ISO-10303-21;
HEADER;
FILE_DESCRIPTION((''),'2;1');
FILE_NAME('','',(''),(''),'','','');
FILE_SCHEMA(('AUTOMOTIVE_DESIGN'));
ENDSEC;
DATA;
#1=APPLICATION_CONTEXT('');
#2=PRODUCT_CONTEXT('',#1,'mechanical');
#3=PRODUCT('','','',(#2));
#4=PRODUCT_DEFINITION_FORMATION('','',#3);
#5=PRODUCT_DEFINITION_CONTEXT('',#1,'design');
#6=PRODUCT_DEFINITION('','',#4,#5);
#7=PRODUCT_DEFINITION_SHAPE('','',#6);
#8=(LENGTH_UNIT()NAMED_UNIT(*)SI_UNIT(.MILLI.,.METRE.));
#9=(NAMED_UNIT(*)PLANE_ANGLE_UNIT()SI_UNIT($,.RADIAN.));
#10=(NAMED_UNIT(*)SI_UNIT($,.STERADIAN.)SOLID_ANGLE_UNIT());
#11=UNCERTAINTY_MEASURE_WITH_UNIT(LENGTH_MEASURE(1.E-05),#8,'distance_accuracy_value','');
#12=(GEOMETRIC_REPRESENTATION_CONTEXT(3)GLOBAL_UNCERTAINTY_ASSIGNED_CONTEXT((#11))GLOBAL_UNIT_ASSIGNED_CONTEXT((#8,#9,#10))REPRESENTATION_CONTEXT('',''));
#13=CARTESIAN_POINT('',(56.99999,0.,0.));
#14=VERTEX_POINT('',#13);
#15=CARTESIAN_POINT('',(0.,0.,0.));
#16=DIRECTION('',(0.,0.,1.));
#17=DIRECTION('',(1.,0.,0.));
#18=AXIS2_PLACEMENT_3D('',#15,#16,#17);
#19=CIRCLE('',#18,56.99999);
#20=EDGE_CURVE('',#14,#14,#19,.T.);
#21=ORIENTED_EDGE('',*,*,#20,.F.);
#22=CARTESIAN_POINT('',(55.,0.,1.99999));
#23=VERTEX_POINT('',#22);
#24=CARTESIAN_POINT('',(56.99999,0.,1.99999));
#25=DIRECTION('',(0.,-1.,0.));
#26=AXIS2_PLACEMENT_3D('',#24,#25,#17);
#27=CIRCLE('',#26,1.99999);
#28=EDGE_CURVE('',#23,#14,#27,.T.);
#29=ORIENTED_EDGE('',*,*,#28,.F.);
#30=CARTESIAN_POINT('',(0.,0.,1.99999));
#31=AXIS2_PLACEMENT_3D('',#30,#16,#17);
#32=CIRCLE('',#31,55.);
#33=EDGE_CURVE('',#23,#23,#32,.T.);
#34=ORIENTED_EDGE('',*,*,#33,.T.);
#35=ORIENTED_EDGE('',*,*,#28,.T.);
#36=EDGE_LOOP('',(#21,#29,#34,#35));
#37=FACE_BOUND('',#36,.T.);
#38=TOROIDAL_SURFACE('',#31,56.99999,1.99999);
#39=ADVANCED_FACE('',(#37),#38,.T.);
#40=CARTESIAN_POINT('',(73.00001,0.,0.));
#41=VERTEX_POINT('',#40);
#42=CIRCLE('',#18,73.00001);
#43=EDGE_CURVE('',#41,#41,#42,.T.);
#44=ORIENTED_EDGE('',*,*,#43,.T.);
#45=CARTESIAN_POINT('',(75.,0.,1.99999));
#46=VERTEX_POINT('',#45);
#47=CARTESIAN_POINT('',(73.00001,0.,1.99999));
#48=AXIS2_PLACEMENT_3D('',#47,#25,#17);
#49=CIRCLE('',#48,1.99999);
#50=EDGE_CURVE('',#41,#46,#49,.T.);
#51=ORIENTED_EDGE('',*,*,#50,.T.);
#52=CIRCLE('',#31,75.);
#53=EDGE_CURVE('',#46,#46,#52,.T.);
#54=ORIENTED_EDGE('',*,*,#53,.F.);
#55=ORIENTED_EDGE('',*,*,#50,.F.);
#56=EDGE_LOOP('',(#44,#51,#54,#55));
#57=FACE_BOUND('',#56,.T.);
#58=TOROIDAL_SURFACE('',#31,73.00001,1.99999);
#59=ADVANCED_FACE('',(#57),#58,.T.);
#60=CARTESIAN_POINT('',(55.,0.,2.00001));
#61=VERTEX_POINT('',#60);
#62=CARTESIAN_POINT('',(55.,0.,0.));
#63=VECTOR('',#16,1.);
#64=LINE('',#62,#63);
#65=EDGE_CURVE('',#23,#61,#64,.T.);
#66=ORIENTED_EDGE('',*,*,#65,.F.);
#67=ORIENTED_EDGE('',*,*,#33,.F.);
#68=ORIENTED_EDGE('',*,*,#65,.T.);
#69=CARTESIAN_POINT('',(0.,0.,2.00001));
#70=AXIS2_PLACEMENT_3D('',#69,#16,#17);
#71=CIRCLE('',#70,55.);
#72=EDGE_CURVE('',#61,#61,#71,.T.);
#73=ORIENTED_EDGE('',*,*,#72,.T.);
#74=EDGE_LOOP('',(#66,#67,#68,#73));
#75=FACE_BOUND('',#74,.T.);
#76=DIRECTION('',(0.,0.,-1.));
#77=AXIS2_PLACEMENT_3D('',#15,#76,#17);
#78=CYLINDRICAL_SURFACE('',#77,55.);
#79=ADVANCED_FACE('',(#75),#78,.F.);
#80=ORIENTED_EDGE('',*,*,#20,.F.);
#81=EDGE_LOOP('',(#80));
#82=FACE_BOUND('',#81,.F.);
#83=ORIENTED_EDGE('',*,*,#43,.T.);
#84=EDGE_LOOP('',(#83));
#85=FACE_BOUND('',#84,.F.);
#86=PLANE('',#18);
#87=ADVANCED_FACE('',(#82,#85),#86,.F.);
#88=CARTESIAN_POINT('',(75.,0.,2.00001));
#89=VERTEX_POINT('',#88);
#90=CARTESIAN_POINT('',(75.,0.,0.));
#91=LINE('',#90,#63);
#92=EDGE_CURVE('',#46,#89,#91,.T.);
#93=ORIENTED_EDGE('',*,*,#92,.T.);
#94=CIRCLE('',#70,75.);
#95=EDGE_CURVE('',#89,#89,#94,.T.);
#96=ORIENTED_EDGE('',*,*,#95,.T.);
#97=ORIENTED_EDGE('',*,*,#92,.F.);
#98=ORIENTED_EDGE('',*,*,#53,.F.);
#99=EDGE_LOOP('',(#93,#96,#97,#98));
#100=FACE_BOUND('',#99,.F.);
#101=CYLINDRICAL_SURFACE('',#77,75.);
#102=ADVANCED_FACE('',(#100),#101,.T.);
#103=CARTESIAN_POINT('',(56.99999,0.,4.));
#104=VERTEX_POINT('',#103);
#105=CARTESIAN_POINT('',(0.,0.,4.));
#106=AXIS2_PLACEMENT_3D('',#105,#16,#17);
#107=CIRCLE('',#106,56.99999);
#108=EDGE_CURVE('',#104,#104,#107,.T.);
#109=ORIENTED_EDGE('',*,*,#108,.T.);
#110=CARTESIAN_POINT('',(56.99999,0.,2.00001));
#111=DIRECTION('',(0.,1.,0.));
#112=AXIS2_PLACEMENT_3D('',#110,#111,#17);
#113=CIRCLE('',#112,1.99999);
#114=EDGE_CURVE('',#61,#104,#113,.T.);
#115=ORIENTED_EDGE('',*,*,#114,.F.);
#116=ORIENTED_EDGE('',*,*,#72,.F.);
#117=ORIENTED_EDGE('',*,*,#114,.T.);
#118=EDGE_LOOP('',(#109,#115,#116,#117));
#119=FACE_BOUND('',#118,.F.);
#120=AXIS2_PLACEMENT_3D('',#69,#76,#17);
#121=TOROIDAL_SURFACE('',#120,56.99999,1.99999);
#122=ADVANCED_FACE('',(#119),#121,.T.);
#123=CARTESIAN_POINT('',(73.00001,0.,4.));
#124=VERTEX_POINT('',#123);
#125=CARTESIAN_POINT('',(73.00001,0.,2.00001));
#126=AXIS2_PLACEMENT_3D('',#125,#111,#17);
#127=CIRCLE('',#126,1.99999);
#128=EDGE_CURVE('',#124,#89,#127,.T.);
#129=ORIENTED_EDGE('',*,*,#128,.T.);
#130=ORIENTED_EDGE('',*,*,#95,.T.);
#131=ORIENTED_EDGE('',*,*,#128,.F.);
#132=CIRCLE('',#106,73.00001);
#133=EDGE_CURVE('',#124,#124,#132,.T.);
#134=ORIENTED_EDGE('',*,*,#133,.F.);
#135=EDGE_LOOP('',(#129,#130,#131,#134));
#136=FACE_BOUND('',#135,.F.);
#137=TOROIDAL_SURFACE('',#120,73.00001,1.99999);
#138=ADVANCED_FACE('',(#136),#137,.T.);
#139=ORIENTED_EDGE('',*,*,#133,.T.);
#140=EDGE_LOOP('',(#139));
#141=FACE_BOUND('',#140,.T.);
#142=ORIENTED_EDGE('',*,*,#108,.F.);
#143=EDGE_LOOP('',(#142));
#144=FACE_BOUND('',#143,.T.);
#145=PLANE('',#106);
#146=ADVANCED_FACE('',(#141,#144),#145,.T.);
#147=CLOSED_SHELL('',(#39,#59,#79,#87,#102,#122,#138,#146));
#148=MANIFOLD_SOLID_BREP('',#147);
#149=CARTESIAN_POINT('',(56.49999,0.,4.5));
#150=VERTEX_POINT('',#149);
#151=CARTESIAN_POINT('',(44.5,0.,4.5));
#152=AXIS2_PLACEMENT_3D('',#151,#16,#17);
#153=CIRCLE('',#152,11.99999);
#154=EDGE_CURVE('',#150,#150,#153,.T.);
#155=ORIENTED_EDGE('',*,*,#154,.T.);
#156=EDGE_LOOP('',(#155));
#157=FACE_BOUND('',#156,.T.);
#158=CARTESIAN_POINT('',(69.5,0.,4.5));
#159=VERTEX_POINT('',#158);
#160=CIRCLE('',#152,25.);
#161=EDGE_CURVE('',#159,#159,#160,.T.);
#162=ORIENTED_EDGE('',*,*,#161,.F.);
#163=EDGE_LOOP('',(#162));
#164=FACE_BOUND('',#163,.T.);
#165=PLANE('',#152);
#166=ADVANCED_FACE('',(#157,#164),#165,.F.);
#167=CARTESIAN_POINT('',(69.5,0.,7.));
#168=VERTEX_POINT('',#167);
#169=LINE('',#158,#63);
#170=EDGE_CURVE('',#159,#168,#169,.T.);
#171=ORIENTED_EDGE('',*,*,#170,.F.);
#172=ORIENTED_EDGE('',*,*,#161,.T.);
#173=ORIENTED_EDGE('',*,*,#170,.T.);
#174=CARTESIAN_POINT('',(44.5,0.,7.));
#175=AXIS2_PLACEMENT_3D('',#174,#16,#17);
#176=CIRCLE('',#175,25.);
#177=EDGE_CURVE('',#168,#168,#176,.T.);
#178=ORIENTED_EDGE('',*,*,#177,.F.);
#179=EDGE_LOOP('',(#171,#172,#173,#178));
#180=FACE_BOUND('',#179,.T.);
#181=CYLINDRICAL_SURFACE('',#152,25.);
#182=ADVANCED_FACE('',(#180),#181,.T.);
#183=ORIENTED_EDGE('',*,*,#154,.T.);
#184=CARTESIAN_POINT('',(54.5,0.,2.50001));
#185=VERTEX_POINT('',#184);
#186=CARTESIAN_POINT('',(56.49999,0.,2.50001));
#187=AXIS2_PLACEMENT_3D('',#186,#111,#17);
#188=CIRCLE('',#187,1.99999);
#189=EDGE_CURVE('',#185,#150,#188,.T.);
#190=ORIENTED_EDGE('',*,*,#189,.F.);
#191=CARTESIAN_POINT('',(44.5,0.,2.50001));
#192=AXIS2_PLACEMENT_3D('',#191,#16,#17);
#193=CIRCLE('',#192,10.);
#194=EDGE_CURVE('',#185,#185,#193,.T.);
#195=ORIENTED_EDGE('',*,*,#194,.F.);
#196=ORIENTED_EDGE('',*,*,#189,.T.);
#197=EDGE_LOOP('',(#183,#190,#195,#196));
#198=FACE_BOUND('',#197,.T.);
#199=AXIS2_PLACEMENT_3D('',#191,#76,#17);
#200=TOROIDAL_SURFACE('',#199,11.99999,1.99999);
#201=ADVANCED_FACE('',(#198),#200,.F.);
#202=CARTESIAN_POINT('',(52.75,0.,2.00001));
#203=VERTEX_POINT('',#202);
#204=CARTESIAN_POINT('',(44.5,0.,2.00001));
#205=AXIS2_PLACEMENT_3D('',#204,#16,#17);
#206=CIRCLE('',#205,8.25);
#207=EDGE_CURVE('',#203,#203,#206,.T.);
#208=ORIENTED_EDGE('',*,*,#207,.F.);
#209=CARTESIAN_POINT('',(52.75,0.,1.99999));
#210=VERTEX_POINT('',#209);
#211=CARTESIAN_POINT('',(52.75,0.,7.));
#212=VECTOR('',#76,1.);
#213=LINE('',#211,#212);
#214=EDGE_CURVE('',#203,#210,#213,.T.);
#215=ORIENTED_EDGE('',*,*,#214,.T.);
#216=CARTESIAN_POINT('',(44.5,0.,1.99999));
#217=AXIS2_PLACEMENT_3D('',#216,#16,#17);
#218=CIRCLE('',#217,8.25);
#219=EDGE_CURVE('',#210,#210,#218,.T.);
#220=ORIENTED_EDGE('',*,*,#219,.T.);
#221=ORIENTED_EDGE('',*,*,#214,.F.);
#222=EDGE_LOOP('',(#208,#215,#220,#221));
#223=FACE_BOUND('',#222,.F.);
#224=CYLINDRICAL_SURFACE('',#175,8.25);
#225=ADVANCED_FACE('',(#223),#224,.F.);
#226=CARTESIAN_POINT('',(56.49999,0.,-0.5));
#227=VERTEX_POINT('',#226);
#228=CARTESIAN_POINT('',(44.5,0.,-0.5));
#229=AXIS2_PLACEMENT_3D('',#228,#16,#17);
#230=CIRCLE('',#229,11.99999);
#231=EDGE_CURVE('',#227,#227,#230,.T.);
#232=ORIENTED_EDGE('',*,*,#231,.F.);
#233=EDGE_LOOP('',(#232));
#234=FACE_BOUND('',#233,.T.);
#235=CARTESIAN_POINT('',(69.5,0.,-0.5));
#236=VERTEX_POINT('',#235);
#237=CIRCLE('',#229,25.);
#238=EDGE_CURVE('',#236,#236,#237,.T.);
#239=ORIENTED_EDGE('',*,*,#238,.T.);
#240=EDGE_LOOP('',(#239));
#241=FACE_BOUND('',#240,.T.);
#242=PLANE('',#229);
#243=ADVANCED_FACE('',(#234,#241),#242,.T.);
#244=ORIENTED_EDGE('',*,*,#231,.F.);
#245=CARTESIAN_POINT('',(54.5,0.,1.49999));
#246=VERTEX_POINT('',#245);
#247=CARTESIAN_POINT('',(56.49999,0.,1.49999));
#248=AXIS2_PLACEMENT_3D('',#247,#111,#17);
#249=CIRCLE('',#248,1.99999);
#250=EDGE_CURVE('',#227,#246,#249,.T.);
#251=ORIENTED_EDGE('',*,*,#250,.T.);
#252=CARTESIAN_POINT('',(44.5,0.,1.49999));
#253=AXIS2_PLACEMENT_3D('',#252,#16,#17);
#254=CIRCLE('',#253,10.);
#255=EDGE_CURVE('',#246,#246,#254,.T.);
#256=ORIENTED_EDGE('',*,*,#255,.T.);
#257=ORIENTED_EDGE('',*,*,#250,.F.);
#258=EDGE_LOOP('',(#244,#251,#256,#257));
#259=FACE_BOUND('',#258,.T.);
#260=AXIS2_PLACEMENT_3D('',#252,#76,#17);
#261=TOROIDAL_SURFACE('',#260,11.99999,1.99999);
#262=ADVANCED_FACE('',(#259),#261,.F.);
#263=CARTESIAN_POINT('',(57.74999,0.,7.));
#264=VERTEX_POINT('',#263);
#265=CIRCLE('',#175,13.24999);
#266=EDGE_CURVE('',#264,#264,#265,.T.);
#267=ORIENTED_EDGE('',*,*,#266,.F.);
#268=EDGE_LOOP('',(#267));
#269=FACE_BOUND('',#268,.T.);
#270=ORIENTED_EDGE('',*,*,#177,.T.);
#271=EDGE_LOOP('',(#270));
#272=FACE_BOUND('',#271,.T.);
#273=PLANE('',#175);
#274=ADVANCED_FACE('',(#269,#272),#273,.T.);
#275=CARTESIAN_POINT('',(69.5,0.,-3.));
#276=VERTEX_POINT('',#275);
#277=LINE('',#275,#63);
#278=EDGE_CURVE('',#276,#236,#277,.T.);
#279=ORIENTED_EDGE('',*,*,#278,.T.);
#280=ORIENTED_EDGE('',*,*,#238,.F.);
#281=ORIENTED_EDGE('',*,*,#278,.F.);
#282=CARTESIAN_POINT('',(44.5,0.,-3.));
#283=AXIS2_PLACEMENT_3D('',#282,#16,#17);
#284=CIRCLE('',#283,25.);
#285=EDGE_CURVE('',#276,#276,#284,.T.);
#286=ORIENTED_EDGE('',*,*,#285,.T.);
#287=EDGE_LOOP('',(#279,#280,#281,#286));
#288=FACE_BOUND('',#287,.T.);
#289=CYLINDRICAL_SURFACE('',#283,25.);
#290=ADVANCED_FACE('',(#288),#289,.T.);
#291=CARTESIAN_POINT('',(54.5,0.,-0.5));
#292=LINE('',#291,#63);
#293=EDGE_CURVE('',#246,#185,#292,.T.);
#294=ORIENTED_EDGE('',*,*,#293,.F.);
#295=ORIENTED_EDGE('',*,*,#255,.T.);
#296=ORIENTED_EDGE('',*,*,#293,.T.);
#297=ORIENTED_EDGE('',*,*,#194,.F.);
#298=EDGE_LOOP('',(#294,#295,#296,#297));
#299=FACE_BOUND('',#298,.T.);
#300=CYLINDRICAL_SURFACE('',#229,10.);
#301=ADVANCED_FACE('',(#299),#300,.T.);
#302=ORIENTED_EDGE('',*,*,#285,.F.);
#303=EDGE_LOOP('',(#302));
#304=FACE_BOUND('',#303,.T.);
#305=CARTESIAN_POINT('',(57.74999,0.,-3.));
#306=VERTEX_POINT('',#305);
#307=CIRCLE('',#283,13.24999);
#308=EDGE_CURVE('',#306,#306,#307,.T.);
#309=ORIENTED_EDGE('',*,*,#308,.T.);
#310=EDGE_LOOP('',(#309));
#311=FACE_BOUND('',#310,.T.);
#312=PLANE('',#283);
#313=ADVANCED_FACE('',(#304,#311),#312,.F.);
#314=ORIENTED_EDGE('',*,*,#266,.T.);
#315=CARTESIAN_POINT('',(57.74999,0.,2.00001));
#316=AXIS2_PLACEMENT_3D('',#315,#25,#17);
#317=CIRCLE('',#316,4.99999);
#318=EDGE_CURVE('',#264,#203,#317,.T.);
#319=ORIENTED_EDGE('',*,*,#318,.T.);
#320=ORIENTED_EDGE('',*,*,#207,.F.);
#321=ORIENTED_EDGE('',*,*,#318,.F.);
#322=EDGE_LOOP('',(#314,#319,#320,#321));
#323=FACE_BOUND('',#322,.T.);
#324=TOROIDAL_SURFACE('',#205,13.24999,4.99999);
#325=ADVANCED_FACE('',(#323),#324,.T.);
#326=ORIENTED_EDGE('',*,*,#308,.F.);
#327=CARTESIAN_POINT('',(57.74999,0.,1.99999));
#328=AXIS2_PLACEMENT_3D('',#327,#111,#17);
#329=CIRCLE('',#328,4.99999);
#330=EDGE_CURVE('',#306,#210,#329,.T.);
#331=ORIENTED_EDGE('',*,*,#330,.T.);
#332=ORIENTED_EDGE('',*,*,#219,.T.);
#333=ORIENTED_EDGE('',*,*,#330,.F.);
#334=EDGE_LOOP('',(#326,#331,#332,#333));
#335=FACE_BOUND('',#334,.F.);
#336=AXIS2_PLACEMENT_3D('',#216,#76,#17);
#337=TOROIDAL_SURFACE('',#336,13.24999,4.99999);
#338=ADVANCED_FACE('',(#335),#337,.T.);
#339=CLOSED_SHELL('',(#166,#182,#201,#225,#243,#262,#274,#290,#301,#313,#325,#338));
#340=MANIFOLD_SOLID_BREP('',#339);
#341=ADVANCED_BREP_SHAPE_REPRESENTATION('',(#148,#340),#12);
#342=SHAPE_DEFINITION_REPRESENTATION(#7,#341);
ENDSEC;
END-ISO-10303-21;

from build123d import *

# Parameters (mm, degrees)
F0_R     = 75
F0_R_2   = 55
F1_DEPTH = 4
F4_R     = 8.25
F5_DEPTH = 25
F6_R     = 4.99999
F7_R     = 1.99999
F7_2_R   = 1.99999
F8_R     = 1.99999


# Not quite as in the source:
# - a fillet or chamfer is up to 0.001 mm smaller than in the source, because OpenCascade refuses the exact size


with BuildPart() as f1:
    # F0 (on Top) → F1 (new body)
    with BuildSketch(Plane.XY):
        Circle(F0_R)
        Circle(F0_R_2, mode=Mode.SUBTRACT)
    extrude(amount=F1_DEPTH)

    # F7 (radius 2 in the source; OpenCascade refuses exactly that, so slightly less here)
    f7_edges = [f1.edges().sort_by_distance(p)[0] for p in [
        (55, 0, 2),
        (-55, 0, 0),
        (-55, 0, 4),
    ]]
    fillet(f7_edges, radius=F7_R)

    # F8 (radius 2 in the source; OpenCascade refuses exactly that, so slightly less here)
    f8_edges = [f1.edges().sort_by_distance(p)[0] for p in [
        (-75, 0, 4),
        (-75, 0, 0),
    ]]
    fillet(f8_edges, radius=F8_R)


with BuildPart() as f3:
    # F2 (on Front) → F3 (revolve)
    with BuildSketch(Plane.XZ):
        Polygon((54.5, -0.5), (54.5, 4.5), (69.5, 4.5), (69.5, 7), (54.5, 7), (44.5, 7), (44.5, -3), (54.5, -3), (69.5, -3), (69.5, -0.5), align=None)
    revolve(axis=Axis((44.5, 0, 2), (0, 0, 1)))

    # F4 (on face) → F5 (cut)
    with BuildSketch(Plane.XY.offset(7)):
        with Locations((44.5, 0)):
            Circle(F4_R)
    extrude(amount=-F5_DEPTH, mode=Mode.SUBTRACT)

    # F6 (radius 5 in the source; OpenCascade refuses exactly that, so slightly less here)
    f6_edges = [f3.edges().sort_by_distance(p)[0] for p in [
        (36.25, 0, 7),
        (36.25, 0, -3),
    ]]
    fillet(f6_edges, radius=F6_R)

    # F7#2 (radius 2 in the source; OpenCascade refuses exactly that, so slightly less here)
    f7_2_edges = [f3.edges().sort_by_distance(p)[0] for p in [
        (34.5, 0, -0.5),
        (34.5, 0, 4.5),
        (54.5, 0, 2),
    ]]
    fillet(f7_2_edges, radius=F7_2_R)


solid = Compound([f1.part, f3.part])
